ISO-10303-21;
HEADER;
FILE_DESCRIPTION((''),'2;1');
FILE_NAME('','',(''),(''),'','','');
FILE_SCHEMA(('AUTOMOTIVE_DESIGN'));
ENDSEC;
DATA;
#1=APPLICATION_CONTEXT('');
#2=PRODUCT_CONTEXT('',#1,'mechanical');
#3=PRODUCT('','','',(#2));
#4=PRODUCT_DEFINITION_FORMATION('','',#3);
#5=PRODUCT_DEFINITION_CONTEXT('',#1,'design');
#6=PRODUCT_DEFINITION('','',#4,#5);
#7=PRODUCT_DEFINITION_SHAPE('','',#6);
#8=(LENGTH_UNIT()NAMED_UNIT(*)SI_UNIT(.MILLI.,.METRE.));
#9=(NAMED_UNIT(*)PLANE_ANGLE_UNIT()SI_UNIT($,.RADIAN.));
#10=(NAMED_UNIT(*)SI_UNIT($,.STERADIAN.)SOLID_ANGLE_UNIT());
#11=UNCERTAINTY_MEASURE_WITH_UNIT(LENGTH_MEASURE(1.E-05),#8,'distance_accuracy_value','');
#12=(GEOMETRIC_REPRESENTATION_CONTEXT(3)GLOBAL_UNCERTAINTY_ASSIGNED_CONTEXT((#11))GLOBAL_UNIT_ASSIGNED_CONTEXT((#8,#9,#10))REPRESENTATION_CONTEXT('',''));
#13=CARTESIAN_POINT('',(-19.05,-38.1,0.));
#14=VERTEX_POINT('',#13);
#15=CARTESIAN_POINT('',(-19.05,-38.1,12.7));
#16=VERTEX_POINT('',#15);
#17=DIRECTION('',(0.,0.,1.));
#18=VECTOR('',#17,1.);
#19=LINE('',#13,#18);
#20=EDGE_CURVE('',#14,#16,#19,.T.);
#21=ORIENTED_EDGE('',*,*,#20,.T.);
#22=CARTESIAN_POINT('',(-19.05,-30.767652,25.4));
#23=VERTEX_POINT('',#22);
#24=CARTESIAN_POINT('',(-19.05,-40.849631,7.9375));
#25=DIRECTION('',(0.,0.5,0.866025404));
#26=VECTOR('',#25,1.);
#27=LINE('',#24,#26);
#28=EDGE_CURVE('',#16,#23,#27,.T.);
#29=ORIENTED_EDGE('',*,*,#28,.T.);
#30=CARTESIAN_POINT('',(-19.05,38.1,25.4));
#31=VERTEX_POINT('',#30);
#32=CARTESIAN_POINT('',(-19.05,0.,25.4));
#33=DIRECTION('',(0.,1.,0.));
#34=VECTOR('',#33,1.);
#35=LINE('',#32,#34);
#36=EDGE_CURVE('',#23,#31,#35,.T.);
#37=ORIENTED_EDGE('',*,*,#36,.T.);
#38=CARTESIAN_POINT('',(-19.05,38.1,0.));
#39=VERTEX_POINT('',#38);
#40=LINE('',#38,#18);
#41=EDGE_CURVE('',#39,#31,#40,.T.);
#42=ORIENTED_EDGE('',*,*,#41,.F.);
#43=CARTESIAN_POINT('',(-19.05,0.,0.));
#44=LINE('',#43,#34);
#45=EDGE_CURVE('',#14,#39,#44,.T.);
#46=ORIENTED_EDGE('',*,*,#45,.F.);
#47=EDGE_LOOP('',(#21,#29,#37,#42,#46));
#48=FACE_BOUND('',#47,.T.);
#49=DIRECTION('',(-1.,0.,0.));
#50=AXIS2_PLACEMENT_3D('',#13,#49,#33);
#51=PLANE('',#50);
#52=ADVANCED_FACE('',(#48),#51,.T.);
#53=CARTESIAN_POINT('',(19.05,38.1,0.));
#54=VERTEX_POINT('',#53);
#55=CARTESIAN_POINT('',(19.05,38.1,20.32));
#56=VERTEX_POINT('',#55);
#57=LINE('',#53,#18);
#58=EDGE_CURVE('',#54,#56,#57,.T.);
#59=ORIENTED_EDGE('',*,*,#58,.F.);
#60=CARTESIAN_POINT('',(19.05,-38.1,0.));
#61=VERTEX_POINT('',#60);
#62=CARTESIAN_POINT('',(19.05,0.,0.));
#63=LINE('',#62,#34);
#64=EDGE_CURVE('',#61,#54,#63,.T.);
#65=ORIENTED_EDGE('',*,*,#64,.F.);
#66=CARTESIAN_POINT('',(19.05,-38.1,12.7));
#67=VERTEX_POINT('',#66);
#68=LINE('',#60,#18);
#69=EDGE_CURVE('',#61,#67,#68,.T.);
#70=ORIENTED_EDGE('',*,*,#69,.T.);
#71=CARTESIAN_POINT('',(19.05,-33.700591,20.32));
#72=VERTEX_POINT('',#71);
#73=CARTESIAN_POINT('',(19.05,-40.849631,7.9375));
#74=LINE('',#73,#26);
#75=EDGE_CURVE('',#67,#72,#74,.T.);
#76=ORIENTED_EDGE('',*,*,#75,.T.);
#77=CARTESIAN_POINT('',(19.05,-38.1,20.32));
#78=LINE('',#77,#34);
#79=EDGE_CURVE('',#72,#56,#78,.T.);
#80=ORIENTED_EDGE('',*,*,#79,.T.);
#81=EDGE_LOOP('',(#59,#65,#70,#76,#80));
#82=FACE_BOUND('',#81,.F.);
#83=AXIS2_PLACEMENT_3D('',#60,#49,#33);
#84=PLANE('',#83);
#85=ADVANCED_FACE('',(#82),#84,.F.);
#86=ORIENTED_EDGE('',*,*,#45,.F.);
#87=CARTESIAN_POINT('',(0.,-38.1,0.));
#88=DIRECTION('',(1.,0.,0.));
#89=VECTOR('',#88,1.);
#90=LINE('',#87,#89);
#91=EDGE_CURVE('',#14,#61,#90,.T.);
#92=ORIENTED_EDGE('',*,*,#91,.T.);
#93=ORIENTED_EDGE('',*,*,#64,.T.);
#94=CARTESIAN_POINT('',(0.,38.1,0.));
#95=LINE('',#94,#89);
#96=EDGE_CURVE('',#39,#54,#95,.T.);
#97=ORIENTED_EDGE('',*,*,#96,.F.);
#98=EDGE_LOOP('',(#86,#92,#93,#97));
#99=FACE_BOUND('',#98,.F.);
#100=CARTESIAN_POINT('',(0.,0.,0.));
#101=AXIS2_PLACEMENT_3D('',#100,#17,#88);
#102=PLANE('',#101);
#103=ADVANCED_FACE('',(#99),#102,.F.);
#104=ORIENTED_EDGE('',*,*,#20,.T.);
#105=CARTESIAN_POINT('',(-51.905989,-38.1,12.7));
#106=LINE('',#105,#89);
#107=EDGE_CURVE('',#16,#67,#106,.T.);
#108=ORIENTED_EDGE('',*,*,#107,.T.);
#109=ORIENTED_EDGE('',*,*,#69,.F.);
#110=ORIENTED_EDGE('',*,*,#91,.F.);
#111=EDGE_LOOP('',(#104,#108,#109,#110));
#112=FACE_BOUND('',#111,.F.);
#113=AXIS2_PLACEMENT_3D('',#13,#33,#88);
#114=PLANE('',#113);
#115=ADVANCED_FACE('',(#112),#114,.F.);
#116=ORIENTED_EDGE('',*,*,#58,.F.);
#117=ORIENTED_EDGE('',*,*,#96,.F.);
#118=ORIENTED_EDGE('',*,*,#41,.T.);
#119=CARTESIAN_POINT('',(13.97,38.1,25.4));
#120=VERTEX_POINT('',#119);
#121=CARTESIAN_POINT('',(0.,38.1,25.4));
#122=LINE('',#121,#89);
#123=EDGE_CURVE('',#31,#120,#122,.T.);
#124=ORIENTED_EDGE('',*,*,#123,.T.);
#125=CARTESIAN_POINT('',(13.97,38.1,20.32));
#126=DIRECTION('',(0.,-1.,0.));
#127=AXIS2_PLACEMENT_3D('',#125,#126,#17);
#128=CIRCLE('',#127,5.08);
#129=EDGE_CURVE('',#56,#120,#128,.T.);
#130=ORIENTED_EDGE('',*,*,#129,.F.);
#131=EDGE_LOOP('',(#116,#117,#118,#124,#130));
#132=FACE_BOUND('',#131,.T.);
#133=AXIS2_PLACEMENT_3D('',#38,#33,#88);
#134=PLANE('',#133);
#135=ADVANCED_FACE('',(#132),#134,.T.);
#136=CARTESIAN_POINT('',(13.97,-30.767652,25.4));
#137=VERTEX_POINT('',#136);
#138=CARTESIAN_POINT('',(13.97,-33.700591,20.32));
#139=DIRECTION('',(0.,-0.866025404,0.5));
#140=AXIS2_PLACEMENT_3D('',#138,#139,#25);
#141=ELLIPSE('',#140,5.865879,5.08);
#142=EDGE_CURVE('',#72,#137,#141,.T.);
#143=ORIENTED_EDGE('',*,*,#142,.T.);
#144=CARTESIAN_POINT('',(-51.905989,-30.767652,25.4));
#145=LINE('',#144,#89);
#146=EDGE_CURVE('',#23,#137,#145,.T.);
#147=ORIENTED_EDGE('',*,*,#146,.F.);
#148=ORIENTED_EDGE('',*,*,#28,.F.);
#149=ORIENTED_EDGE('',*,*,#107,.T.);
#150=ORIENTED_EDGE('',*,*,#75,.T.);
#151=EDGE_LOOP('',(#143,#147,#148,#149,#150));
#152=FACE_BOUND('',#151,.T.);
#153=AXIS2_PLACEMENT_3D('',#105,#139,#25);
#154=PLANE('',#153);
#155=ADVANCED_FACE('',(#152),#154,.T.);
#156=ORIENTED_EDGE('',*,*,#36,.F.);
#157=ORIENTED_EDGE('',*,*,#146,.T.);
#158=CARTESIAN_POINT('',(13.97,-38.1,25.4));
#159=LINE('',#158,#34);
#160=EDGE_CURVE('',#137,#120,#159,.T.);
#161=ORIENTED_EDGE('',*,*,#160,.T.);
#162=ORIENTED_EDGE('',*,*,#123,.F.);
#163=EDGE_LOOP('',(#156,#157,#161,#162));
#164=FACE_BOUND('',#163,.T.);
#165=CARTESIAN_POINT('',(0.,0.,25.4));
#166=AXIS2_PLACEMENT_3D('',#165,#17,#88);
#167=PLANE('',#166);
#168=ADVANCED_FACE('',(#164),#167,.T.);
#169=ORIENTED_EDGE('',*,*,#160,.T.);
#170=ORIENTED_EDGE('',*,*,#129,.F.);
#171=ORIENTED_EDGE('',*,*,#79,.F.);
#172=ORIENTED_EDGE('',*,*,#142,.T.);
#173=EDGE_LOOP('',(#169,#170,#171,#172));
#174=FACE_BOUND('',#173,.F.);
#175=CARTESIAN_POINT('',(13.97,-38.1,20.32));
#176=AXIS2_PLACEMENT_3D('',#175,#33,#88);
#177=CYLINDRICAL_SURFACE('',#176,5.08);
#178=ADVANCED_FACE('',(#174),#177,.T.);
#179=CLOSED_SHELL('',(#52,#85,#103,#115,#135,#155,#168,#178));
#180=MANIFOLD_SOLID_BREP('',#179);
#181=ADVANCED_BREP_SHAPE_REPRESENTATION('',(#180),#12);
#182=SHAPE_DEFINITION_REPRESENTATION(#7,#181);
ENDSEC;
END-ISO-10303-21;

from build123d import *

# Parameters (mm, degrees)
F0_W        = 38.1
F0_H        = 76.2
F1_DEPTH    = 25.4
F2_R        = 5.08
F3_T1_DEPTH = 98.731978168
F3_T6_ANGLE = 90


# Not quite as in the source:
# - a fillet or chamfer that OpenCascade refuses, or shapes differently, is made with other operations: its cross-section is extruded or revolved along the edge and cut away or added


with BuildPart() as f1:
    # F0 (on Top) → F1 (new body)
    with BuildSketch(Plane.XY):
        Rectangle(F0_W, F0_H)
    extrude(amount=F1_DEPTH)

    # F2
    f2_edges = [f1.edges().sort_by_distance(p)[0] for p in [
        (19.05, 0, 25.4),
    ]]
    fillet(f2_edges, radius=F2_R)

    # F3: chamfer of 12.7 x 7.3323484187 on 1 edges, made by hand

    # F3_s2 → F3_t1 (cut)
    with BuildSketch(Plane.YZ.offset(-51.905989084)):
        Polygon((-38.1, 12.7), (-30.7676515813, 25.4), (-38.1, 25.4), align=None)
    extrude(amount=F3_T1_DEPTH, mode=Mode.SUBTRACT)


with BuildPart() as f3_tool4:
    # F3_s5 → F3_t6 (revolve)
    with BuildSketch(Plane.XY.offset(20.32)):
        Polygon((13.97, -33.7005909488), (19.05, -30.7676515813), (19.05, -38.1), (13.97, -38.1), align=None)
    revolve(axis=Axis((13.97, -38.1, 20.32), (0, -1, 0)), revolution_arc=F3_T6_ANGLE)

    split(bisect_by=Plane(origin=(0, -34.074261314, 19.6727839421), x_dir=(1, 0, 0), z_dir=(0, -0.8660254038, 0.5)), keep=Keep.TOP)


with BuildPart() as f1_1:
    add(f1.part)

    # F3_t3: cut F3_tool4
    add(f3_tool4.part, mode=Mode.SUBTRACT)


solid = f1_1.part
